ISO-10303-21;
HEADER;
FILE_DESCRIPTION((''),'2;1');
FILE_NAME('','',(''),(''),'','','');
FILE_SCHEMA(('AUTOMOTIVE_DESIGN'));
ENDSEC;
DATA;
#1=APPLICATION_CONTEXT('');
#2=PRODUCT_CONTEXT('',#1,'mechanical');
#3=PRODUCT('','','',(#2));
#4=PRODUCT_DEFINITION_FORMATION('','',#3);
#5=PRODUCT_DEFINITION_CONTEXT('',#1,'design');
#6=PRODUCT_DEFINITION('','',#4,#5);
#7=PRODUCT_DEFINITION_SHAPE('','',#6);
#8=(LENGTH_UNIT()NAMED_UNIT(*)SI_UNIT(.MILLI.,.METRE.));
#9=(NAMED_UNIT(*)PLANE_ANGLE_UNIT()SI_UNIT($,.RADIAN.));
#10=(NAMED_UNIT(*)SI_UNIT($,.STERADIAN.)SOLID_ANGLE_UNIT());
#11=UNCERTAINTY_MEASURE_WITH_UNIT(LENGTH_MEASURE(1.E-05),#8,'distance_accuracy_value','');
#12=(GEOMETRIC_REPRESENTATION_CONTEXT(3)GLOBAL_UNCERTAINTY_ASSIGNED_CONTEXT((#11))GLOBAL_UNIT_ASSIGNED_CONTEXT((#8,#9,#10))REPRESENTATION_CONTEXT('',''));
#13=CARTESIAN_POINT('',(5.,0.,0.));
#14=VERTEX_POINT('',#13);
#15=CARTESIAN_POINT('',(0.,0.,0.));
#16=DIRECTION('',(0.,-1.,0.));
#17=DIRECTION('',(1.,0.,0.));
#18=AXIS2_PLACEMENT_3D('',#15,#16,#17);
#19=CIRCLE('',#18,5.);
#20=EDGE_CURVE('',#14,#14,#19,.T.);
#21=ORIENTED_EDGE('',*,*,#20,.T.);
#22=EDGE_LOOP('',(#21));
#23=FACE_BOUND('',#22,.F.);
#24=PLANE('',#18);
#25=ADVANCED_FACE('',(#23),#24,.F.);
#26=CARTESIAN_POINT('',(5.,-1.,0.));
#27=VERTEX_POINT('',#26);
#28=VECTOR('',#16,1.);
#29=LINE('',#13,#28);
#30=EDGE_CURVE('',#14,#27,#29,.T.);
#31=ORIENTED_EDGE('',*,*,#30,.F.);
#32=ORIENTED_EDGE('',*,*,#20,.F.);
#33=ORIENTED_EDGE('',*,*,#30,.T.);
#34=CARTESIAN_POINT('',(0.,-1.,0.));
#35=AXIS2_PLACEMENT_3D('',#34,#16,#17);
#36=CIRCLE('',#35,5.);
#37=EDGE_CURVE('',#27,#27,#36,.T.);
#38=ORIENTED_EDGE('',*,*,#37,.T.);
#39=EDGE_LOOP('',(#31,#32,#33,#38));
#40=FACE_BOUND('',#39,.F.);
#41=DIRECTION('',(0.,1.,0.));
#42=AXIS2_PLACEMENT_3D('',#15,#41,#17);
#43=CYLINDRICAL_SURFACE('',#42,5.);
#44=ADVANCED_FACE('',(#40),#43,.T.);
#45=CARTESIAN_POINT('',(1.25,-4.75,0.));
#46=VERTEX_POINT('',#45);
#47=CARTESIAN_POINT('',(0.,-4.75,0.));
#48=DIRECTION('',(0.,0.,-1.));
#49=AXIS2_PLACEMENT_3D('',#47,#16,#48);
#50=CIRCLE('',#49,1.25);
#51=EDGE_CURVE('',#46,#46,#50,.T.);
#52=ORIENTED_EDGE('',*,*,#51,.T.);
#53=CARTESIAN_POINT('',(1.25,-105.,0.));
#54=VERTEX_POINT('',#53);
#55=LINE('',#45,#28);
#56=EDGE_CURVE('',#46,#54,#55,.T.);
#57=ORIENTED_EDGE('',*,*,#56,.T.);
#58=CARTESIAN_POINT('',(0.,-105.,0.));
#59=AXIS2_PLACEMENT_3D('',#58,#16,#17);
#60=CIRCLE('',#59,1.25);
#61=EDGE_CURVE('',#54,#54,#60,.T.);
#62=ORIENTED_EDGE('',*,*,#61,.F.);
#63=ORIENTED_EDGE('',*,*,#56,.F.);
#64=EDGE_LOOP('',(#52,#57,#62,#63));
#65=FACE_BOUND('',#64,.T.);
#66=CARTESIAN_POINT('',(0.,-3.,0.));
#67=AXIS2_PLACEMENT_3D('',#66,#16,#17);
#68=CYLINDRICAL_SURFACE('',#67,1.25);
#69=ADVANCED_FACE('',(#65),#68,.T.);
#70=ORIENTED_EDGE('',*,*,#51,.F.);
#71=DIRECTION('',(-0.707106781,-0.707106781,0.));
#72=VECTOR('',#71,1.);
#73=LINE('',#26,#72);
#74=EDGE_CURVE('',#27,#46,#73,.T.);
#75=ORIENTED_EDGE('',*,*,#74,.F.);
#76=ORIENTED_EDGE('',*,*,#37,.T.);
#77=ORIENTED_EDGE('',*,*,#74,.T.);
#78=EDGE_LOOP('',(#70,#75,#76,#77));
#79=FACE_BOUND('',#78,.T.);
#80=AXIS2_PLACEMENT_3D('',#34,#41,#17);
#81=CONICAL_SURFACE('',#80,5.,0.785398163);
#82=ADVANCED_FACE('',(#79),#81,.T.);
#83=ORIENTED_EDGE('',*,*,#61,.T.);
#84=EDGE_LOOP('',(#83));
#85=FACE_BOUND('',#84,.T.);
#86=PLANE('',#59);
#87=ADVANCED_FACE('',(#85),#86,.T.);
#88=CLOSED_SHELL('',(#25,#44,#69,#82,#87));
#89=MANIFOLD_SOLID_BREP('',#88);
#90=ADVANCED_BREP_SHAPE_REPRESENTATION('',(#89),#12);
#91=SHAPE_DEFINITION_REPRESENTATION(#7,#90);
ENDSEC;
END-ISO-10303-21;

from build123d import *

# Parameters (mm, degrees)
F0_R        = 5
F1_DEPTH    = 5
F2_R        = 1.25
F3_DEPTH    = 100
F4_S5_R     = 1.25
F4_T6_DEPTH = 9


# Not quite as in the source:
# - a fillet or chamfer that OpenCascade refuses, or shapes differently, is made with other operations: its cross-section is extruded or revolved along the edge and cut away or added


with BuildPart() as f1:
    # F0 (on Front) → F1 (new body)
    with BuildSketch(Plane.XZ):
        Circle(F0_R)
    extrude(amount=F1_DEPTH)

    # F2 (on face) → F3 (join)
    with BuildSketch(Plane.XZ.offset(5)):
        Circle(F2_R)
    extrude(amount=F3_DEPTH)

    # F4: chamfer of 4 on 1 edges, made by hand


with BuildPart() as f4_tool2:
    # F4_s3 → F4_t4 (revolve)
    with BuildSketch(Plane.XY):
        Polygon((5, -1), (1, -5), (5, -5), align=None)
    revolve(axis=Axis((0, -5, 0), (0, -1, 0)))

    # F4_s5 → F4_t6 (cut, symmetric)
    with BuildSketch(Plane.XZ.offset(3)):
        Circle(F4_S5_R)
    extrude(amount=F4_T6_DEPTH, both=True, mode=Mode.SUBTRACT)


with BuildPart() as f1_1:
    add(f1.part)

    # F4_t1: cut F4_tool2
    add(f4_tool2.part, mode=Mode.SUBTRACT)


solid = f1_1.part
